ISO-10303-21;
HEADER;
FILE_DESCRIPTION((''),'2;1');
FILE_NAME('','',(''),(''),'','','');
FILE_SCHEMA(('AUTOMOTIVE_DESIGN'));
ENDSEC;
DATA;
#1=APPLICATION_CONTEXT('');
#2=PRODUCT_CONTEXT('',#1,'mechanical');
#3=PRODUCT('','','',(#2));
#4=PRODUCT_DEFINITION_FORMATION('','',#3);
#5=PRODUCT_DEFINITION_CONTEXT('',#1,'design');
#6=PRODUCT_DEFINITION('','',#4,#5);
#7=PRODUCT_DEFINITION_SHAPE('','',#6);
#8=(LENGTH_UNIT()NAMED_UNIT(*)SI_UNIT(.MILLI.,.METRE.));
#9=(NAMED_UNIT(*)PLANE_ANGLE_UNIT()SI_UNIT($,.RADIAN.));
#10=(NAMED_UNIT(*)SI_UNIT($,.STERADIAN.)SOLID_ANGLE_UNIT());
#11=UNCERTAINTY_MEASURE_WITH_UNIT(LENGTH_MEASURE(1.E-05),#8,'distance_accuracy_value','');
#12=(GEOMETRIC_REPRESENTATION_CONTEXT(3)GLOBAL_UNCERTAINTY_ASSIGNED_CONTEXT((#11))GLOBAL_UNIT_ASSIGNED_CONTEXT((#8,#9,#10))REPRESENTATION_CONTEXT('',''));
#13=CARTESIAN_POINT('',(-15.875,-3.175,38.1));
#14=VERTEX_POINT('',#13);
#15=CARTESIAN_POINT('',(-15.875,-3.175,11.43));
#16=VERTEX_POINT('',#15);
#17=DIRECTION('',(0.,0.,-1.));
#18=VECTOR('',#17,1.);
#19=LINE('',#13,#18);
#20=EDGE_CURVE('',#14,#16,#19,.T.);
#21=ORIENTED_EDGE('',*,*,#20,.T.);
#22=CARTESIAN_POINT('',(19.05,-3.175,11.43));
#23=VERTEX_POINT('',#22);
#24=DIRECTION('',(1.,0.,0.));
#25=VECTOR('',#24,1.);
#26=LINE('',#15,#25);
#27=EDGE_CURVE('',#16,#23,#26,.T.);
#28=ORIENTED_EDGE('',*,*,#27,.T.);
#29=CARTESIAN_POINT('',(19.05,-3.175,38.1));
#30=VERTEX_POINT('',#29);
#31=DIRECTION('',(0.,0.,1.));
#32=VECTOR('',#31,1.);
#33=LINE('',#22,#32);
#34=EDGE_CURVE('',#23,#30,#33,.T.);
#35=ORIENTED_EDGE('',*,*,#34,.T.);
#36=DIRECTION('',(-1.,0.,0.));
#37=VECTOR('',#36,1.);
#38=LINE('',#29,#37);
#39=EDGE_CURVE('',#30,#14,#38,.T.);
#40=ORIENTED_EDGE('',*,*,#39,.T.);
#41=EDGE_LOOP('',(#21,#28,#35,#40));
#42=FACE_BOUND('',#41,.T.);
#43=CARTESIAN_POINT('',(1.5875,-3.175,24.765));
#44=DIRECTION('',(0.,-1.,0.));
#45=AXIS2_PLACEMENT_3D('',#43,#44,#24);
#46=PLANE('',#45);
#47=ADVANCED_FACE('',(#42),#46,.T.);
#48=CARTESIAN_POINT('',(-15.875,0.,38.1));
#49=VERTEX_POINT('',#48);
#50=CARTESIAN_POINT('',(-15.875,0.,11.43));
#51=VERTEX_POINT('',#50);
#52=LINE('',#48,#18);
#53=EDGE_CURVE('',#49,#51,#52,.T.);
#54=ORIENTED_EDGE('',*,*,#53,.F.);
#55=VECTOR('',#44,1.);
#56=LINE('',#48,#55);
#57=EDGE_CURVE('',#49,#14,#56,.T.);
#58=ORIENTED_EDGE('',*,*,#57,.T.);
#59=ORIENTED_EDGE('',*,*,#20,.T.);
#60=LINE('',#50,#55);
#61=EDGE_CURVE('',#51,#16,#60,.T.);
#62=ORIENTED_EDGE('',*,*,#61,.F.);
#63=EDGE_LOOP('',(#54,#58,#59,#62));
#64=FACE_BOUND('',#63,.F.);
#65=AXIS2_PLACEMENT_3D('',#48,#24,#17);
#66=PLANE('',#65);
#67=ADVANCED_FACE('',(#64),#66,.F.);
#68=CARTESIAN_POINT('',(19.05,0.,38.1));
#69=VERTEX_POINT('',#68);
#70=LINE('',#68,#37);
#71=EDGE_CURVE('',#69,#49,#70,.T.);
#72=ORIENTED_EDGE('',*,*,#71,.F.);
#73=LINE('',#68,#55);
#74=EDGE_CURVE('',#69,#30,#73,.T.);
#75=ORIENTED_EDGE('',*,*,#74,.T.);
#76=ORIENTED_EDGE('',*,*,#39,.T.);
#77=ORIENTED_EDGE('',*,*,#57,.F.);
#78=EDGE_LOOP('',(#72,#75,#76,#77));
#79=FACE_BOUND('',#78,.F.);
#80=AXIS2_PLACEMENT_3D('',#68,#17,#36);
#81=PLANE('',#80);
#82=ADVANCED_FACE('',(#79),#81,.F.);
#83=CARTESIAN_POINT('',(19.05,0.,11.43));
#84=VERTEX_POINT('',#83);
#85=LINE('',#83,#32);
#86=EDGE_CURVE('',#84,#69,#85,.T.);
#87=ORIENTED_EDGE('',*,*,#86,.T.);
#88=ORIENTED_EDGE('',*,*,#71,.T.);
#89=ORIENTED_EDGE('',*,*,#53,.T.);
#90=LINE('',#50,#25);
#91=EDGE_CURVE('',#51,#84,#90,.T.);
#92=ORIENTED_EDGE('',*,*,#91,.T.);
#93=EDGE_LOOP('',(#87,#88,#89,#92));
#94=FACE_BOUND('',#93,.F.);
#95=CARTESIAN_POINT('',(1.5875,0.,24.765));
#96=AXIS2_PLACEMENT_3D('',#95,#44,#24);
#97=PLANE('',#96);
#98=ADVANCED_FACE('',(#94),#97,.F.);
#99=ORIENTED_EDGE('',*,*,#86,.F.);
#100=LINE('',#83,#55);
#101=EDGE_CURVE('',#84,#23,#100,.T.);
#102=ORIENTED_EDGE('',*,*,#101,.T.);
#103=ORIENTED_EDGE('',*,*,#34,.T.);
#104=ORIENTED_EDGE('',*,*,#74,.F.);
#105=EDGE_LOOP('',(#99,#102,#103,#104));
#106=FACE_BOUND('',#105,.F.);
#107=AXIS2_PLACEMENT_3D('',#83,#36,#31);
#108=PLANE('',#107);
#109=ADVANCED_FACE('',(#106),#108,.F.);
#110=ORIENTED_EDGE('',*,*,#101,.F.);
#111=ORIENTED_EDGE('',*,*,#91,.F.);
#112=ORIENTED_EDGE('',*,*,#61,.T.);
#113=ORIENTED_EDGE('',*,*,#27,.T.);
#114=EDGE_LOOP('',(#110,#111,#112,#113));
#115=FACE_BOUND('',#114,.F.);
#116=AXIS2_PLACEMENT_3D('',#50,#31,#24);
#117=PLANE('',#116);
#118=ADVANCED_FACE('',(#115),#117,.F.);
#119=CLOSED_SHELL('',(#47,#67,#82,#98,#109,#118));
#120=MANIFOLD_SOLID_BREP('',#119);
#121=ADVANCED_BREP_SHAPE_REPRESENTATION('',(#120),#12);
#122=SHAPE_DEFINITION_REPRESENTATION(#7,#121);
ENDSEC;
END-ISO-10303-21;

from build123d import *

# Parameters (mm, degrees)
F1_DEPTH = 3.175


# Not quite as in the source:
# - a feature names something its author has since deleted; it is built from what else it names


with BuildPart() as f1:
    # F0 (on Front) → F1 (new body)
    with BuildSketch(Plane.XZ):
        Polygon((19.05, 11.43), (19.05, 38.1), (-15.875, 38.1), (-15.875, 29.21), (-15.875, 20.32), (-15.875, 11.43), align=None)
    extrude(amount=F1_DEPTH)


solid = f1.part
